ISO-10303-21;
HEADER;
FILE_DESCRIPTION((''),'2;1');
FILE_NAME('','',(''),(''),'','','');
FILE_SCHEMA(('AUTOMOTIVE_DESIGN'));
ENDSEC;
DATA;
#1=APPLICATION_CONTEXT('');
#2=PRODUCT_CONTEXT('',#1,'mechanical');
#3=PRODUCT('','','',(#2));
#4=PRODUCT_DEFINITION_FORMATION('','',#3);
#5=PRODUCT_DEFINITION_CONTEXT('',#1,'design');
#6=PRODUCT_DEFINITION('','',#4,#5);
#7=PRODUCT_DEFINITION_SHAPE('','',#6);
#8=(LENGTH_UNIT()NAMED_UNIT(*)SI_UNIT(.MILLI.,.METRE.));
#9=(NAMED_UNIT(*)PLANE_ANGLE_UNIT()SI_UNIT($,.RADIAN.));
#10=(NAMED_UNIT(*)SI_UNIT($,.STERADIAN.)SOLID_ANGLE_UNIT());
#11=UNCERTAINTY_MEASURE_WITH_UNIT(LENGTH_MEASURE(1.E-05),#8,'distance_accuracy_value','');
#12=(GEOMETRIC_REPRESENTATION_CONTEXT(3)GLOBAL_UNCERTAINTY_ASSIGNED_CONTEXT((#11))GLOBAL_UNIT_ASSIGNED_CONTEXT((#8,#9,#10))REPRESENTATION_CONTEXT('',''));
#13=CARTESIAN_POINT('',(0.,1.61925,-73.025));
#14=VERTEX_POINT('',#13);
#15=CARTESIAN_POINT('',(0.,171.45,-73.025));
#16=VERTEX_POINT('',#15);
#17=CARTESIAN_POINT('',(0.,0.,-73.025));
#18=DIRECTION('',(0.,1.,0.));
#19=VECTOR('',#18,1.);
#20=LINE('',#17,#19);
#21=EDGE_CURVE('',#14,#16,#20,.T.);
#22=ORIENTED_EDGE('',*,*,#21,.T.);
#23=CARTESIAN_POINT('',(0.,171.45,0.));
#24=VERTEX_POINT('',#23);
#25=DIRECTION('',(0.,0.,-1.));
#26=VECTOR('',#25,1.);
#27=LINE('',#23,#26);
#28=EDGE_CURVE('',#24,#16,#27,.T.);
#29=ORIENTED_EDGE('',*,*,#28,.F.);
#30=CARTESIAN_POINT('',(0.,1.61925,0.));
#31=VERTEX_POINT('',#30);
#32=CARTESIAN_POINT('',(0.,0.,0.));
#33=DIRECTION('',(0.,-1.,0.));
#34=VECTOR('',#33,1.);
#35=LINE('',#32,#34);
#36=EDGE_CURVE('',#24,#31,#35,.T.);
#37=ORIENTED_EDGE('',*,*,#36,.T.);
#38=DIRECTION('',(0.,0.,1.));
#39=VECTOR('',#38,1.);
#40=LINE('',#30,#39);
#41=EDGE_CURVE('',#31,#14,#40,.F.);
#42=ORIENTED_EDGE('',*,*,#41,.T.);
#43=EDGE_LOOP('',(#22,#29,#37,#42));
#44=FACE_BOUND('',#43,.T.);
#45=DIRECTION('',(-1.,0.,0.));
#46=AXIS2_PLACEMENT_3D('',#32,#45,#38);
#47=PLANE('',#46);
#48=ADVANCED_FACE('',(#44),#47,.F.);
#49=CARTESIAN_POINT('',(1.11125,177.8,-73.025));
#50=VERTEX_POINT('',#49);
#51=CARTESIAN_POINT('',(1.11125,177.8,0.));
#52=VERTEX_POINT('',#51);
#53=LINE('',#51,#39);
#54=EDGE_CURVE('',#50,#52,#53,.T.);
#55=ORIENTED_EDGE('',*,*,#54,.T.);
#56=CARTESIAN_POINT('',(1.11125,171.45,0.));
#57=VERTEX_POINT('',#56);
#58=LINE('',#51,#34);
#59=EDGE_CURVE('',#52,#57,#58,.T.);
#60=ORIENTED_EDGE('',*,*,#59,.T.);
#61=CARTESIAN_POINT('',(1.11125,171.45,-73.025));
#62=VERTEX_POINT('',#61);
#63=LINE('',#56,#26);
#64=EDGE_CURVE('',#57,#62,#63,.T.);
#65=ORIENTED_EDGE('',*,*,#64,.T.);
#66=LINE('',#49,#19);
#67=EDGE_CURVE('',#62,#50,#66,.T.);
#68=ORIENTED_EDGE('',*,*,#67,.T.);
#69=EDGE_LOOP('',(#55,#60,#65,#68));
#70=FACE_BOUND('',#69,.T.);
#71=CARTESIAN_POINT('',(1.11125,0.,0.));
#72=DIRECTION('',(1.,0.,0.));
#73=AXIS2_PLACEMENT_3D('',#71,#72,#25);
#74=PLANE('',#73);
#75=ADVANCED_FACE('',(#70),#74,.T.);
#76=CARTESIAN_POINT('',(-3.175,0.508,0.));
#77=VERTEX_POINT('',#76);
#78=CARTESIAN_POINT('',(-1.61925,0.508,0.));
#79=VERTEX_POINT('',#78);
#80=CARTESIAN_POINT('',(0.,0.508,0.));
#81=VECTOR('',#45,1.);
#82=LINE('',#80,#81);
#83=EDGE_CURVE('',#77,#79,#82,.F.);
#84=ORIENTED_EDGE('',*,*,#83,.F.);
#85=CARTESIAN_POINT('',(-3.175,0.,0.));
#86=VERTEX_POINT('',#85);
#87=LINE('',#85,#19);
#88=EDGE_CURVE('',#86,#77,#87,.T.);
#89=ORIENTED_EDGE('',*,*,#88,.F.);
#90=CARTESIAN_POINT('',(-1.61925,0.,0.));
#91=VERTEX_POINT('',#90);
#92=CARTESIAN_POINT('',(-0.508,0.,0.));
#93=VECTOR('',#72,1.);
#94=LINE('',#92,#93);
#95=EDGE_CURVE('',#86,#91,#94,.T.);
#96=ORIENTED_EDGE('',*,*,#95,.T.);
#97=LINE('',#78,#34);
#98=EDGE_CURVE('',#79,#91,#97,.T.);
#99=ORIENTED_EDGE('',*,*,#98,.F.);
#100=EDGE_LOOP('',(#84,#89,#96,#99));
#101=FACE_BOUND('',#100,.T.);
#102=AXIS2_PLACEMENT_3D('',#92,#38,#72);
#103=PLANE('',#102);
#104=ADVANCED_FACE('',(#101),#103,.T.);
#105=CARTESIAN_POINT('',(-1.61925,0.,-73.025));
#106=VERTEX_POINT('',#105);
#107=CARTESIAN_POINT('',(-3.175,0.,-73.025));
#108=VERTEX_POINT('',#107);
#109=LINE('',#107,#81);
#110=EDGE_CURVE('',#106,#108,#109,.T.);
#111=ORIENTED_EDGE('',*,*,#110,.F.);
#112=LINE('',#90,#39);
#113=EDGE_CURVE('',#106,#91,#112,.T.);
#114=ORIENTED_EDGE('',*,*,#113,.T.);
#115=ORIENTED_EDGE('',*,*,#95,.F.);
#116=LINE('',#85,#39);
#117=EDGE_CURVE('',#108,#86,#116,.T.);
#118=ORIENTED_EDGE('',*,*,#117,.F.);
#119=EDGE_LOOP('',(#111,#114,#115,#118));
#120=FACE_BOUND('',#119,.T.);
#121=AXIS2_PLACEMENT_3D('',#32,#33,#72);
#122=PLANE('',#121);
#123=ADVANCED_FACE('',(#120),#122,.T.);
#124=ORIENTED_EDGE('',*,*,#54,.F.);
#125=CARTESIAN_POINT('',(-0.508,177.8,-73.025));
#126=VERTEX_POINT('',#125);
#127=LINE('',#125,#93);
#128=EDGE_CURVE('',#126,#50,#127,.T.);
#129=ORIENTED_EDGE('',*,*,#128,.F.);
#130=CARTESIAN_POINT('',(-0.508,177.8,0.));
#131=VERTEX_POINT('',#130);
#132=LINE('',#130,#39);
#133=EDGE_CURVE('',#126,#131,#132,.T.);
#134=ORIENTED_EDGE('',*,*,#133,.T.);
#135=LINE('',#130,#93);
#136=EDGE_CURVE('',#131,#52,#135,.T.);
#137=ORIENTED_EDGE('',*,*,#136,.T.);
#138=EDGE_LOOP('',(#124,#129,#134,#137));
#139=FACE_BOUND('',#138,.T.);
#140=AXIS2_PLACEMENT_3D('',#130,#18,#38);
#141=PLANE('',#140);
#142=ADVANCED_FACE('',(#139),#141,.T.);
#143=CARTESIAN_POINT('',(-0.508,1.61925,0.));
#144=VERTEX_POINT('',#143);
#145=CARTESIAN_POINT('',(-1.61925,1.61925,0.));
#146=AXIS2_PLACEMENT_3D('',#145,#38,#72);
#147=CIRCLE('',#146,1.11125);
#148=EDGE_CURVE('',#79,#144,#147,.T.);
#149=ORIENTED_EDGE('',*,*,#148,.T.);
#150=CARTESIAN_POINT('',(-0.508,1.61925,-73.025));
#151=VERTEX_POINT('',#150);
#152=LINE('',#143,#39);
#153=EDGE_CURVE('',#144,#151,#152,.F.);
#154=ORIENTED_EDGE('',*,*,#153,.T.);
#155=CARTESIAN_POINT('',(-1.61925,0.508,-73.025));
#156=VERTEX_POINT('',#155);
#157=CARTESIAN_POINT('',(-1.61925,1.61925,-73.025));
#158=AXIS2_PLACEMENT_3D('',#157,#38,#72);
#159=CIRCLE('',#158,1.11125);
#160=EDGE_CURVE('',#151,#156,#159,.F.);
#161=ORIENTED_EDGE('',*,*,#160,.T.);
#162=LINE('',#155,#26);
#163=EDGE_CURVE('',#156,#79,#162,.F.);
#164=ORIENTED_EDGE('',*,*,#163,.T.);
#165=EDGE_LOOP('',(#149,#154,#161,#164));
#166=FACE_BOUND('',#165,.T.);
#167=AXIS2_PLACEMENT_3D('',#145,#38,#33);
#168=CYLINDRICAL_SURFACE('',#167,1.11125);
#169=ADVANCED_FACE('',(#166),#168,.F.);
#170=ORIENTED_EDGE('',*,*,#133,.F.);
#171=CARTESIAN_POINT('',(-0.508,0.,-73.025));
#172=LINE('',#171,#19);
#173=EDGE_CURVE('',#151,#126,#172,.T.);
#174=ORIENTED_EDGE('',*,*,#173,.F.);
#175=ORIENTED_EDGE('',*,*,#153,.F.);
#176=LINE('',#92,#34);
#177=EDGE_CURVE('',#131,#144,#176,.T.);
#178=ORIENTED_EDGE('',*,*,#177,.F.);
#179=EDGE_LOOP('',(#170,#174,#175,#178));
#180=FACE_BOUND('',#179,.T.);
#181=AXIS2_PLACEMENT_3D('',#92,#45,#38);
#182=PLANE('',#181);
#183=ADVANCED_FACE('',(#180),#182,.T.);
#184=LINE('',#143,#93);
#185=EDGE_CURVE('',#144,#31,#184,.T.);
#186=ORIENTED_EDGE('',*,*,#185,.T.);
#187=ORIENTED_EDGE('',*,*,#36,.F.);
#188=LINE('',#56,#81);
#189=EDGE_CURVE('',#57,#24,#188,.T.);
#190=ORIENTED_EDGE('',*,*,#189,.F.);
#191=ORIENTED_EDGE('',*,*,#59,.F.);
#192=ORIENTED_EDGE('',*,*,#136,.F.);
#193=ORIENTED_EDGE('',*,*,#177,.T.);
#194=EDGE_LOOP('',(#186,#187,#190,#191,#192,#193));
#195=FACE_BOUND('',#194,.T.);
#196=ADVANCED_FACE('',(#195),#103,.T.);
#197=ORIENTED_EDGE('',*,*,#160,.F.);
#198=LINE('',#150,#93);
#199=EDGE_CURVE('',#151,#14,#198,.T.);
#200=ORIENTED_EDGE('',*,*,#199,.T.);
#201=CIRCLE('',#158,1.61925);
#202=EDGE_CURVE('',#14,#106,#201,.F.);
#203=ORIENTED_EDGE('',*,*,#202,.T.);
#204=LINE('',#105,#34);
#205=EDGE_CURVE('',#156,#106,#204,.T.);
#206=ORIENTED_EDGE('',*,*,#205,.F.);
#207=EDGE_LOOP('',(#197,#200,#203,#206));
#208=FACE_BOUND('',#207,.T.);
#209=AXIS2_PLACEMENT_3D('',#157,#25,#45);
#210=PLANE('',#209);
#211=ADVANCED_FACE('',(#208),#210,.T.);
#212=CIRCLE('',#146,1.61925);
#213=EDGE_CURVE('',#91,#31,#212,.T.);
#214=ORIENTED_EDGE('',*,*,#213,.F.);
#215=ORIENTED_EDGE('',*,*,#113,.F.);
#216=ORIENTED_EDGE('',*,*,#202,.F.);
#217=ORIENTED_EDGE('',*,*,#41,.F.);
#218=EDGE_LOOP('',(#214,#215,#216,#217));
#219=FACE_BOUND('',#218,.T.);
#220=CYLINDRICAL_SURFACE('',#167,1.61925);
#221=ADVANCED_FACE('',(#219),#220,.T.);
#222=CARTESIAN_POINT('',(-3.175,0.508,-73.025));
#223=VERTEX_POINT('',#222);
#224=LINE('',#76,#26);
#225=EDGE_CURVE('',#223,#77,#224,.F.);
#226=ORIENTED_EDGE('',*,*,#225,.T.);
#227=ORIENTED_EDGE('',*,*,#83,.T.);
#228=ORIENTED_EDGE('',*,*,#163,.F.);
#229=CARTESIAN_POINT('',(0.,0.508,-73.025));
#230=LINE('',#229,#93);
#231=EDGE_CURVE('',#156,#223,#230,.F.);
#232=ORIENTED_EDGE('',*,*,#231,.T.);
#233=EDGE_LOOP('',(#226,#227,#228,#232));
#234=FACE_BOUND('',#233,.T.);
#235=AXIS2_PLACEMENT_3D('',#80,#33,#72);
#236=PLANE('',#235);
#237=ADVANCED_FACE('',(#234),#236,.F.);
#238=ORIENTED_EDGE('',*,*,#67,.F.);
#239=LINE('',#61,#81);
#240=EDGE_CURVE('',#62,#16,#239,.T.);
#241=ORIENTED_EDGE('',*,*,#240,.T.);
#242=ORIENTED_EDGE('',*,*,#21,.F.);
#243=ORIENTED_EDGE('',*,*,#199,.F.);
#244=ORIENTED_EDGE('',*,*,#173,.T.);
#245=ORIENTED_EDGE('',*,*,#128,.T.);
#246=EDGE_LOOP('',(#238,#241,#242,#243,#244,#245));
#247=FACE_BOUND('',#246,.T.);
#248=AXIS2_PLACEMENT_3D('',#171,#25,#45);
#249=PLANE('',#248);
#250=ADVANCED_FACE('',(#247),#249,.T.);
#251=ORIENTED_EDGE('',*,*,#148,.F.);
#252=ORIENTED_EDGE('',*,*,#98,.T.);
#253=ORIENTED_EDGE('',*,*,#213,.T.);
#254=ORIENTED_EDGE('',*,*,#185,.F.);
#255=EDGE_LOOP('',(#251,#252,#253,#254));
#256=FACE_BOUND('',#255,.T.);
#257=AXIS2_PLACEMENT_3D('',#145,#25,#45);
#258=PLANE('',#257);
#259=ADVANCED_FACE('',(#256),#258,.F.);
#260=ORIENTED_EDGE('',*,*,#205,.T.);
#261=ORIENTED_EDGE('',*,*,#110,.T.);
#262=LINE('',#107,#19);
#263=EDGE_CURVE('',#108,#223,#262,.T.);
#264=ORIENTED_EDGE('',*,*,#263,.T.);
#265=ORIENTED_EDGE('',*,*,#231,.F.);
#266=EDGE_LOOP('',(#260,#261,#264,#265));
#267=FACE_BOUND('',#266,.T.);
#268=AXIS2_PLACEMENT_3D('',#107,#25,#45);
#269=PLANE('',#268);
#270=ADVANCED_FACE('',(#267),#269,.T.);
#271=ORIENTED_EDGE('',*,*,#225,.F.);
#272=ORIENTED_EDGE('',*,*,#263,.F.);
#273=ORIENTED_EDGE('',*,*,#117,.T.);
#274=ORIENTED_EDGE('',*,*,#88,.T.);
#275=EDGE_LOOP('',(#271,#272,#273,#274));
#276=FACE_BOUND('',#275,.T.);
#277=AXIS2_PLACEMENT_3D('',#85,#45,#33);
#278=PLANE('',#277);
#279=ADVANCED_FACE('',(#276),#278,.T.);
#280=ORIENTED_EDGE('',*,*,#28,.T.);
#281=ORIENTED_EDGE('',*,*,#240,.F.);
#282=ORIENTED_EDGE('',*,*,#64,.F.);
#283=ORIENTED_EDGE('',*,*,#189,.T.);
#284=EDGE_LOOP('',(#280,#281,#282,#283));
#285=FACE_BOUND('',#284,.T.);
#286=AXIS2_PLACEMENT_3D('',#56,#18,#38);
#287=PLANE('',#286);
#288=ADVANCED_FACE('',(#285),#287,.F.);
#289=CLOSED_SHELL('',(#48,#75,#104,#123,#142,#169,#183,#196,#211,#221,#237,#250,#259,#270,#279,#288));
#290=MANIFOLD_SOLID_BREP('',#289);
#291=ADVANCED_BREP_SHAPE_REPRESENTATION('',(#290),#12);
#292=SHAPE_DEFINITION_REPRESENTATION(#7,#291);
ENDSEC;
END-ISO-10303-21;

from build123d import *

# Parameters (mm, degrees)
SKETCH1_W                    = 73.025
SKETCH1_H                    = 177.8
BASE_FLANGE1_DEPTH           = 0.508
SKETCH2_W                    = 73.025
SKETCH2_H                    = 6.35
BOSS_EXTRUDE1_DEPTH          = 1.11125
EDGE_FLANGE1_STRIP_W         = 4.2545
EDGE_FLANGE1_STRIP_H         = 0.508
EDGE_FLANGE1_STRIP_CUT_DEPTH = 73.025
EDGE_FLANGE1_DEPTH           = 73.025


# Sheet-metal steps are written as plain solids
with BuildPart() as part:
    # Sketch1 → Base-Flange1 (new body)
    with BuildSketch(Plane(origin=(0, 0, 0), x_dir=(0, 0, -1), z_dir=(1, 0, 0))):
        with Locations((36.5125, 88.9)):
            Rectangle(SKETCH1_W, SKETCH1_H)
    extrude(amount=-BASE_FLANGE1_DEPTH)

    # Sketch2 → Boss-Extrude1 (add)
    with BuildSketch(Plane(origin=(0, 0, 0), x_dir=(0, 0, -1), z_dir=(1, 0, 0))):
        with Locations((36.5125, 174.625)):
            Rectangle(SKETCH2_W, SKETCH2_H)
    extrude(amount=BOSS_EXTRUDE1_DEPTH)

    # Edge-Flange1 strip (across the edge) → Edge-Flange1 strip cut (cut)
    with BuildSketch(Plane(origin=(-0.508, 0, -73.025), x_dir=(0, 1, 0), z_dir=(0, 0, 1))):
        with Locations((-0.508, -0.254)):
            Rectangle(EDGE_FLANGE1_STRIP_W, EDGE_FLANGE1_STRIP_H)
    extrude(amount=EDGE_FLANGE1_STRIP_CUT_DEPTH, mode=Mode.SUBTRACT)

    # Edge-Flange1 section (across the edge) → Edge-Flange1 (add)
    with BuildSketch(Plane(origin=(-0.508, 0, -73.025), x_dir=(0, 1, 0), z_dir=(0, 0, 1))):
        with BuildLine():
            Line((0, 1.11125), (0, 2.667))
            Line((0, 2.667), (0.508, 2.667))
            Line((0.508, 2.667), (0.508, 1.11125))
            ThreePointArc((0.508, 1.11125), (0.833477589, 0.325477589), (1.61925, 0))
            Line((1.61925, 0), (1.61925, -0.508))
            ThreePointArc((1.61925, -0.508), (0.474267345, -0.033732655), (0, 1.11125))
        make_face()
    extrude(amount=EDGE_FLANGE1_DEPTH)


solid = part.part
